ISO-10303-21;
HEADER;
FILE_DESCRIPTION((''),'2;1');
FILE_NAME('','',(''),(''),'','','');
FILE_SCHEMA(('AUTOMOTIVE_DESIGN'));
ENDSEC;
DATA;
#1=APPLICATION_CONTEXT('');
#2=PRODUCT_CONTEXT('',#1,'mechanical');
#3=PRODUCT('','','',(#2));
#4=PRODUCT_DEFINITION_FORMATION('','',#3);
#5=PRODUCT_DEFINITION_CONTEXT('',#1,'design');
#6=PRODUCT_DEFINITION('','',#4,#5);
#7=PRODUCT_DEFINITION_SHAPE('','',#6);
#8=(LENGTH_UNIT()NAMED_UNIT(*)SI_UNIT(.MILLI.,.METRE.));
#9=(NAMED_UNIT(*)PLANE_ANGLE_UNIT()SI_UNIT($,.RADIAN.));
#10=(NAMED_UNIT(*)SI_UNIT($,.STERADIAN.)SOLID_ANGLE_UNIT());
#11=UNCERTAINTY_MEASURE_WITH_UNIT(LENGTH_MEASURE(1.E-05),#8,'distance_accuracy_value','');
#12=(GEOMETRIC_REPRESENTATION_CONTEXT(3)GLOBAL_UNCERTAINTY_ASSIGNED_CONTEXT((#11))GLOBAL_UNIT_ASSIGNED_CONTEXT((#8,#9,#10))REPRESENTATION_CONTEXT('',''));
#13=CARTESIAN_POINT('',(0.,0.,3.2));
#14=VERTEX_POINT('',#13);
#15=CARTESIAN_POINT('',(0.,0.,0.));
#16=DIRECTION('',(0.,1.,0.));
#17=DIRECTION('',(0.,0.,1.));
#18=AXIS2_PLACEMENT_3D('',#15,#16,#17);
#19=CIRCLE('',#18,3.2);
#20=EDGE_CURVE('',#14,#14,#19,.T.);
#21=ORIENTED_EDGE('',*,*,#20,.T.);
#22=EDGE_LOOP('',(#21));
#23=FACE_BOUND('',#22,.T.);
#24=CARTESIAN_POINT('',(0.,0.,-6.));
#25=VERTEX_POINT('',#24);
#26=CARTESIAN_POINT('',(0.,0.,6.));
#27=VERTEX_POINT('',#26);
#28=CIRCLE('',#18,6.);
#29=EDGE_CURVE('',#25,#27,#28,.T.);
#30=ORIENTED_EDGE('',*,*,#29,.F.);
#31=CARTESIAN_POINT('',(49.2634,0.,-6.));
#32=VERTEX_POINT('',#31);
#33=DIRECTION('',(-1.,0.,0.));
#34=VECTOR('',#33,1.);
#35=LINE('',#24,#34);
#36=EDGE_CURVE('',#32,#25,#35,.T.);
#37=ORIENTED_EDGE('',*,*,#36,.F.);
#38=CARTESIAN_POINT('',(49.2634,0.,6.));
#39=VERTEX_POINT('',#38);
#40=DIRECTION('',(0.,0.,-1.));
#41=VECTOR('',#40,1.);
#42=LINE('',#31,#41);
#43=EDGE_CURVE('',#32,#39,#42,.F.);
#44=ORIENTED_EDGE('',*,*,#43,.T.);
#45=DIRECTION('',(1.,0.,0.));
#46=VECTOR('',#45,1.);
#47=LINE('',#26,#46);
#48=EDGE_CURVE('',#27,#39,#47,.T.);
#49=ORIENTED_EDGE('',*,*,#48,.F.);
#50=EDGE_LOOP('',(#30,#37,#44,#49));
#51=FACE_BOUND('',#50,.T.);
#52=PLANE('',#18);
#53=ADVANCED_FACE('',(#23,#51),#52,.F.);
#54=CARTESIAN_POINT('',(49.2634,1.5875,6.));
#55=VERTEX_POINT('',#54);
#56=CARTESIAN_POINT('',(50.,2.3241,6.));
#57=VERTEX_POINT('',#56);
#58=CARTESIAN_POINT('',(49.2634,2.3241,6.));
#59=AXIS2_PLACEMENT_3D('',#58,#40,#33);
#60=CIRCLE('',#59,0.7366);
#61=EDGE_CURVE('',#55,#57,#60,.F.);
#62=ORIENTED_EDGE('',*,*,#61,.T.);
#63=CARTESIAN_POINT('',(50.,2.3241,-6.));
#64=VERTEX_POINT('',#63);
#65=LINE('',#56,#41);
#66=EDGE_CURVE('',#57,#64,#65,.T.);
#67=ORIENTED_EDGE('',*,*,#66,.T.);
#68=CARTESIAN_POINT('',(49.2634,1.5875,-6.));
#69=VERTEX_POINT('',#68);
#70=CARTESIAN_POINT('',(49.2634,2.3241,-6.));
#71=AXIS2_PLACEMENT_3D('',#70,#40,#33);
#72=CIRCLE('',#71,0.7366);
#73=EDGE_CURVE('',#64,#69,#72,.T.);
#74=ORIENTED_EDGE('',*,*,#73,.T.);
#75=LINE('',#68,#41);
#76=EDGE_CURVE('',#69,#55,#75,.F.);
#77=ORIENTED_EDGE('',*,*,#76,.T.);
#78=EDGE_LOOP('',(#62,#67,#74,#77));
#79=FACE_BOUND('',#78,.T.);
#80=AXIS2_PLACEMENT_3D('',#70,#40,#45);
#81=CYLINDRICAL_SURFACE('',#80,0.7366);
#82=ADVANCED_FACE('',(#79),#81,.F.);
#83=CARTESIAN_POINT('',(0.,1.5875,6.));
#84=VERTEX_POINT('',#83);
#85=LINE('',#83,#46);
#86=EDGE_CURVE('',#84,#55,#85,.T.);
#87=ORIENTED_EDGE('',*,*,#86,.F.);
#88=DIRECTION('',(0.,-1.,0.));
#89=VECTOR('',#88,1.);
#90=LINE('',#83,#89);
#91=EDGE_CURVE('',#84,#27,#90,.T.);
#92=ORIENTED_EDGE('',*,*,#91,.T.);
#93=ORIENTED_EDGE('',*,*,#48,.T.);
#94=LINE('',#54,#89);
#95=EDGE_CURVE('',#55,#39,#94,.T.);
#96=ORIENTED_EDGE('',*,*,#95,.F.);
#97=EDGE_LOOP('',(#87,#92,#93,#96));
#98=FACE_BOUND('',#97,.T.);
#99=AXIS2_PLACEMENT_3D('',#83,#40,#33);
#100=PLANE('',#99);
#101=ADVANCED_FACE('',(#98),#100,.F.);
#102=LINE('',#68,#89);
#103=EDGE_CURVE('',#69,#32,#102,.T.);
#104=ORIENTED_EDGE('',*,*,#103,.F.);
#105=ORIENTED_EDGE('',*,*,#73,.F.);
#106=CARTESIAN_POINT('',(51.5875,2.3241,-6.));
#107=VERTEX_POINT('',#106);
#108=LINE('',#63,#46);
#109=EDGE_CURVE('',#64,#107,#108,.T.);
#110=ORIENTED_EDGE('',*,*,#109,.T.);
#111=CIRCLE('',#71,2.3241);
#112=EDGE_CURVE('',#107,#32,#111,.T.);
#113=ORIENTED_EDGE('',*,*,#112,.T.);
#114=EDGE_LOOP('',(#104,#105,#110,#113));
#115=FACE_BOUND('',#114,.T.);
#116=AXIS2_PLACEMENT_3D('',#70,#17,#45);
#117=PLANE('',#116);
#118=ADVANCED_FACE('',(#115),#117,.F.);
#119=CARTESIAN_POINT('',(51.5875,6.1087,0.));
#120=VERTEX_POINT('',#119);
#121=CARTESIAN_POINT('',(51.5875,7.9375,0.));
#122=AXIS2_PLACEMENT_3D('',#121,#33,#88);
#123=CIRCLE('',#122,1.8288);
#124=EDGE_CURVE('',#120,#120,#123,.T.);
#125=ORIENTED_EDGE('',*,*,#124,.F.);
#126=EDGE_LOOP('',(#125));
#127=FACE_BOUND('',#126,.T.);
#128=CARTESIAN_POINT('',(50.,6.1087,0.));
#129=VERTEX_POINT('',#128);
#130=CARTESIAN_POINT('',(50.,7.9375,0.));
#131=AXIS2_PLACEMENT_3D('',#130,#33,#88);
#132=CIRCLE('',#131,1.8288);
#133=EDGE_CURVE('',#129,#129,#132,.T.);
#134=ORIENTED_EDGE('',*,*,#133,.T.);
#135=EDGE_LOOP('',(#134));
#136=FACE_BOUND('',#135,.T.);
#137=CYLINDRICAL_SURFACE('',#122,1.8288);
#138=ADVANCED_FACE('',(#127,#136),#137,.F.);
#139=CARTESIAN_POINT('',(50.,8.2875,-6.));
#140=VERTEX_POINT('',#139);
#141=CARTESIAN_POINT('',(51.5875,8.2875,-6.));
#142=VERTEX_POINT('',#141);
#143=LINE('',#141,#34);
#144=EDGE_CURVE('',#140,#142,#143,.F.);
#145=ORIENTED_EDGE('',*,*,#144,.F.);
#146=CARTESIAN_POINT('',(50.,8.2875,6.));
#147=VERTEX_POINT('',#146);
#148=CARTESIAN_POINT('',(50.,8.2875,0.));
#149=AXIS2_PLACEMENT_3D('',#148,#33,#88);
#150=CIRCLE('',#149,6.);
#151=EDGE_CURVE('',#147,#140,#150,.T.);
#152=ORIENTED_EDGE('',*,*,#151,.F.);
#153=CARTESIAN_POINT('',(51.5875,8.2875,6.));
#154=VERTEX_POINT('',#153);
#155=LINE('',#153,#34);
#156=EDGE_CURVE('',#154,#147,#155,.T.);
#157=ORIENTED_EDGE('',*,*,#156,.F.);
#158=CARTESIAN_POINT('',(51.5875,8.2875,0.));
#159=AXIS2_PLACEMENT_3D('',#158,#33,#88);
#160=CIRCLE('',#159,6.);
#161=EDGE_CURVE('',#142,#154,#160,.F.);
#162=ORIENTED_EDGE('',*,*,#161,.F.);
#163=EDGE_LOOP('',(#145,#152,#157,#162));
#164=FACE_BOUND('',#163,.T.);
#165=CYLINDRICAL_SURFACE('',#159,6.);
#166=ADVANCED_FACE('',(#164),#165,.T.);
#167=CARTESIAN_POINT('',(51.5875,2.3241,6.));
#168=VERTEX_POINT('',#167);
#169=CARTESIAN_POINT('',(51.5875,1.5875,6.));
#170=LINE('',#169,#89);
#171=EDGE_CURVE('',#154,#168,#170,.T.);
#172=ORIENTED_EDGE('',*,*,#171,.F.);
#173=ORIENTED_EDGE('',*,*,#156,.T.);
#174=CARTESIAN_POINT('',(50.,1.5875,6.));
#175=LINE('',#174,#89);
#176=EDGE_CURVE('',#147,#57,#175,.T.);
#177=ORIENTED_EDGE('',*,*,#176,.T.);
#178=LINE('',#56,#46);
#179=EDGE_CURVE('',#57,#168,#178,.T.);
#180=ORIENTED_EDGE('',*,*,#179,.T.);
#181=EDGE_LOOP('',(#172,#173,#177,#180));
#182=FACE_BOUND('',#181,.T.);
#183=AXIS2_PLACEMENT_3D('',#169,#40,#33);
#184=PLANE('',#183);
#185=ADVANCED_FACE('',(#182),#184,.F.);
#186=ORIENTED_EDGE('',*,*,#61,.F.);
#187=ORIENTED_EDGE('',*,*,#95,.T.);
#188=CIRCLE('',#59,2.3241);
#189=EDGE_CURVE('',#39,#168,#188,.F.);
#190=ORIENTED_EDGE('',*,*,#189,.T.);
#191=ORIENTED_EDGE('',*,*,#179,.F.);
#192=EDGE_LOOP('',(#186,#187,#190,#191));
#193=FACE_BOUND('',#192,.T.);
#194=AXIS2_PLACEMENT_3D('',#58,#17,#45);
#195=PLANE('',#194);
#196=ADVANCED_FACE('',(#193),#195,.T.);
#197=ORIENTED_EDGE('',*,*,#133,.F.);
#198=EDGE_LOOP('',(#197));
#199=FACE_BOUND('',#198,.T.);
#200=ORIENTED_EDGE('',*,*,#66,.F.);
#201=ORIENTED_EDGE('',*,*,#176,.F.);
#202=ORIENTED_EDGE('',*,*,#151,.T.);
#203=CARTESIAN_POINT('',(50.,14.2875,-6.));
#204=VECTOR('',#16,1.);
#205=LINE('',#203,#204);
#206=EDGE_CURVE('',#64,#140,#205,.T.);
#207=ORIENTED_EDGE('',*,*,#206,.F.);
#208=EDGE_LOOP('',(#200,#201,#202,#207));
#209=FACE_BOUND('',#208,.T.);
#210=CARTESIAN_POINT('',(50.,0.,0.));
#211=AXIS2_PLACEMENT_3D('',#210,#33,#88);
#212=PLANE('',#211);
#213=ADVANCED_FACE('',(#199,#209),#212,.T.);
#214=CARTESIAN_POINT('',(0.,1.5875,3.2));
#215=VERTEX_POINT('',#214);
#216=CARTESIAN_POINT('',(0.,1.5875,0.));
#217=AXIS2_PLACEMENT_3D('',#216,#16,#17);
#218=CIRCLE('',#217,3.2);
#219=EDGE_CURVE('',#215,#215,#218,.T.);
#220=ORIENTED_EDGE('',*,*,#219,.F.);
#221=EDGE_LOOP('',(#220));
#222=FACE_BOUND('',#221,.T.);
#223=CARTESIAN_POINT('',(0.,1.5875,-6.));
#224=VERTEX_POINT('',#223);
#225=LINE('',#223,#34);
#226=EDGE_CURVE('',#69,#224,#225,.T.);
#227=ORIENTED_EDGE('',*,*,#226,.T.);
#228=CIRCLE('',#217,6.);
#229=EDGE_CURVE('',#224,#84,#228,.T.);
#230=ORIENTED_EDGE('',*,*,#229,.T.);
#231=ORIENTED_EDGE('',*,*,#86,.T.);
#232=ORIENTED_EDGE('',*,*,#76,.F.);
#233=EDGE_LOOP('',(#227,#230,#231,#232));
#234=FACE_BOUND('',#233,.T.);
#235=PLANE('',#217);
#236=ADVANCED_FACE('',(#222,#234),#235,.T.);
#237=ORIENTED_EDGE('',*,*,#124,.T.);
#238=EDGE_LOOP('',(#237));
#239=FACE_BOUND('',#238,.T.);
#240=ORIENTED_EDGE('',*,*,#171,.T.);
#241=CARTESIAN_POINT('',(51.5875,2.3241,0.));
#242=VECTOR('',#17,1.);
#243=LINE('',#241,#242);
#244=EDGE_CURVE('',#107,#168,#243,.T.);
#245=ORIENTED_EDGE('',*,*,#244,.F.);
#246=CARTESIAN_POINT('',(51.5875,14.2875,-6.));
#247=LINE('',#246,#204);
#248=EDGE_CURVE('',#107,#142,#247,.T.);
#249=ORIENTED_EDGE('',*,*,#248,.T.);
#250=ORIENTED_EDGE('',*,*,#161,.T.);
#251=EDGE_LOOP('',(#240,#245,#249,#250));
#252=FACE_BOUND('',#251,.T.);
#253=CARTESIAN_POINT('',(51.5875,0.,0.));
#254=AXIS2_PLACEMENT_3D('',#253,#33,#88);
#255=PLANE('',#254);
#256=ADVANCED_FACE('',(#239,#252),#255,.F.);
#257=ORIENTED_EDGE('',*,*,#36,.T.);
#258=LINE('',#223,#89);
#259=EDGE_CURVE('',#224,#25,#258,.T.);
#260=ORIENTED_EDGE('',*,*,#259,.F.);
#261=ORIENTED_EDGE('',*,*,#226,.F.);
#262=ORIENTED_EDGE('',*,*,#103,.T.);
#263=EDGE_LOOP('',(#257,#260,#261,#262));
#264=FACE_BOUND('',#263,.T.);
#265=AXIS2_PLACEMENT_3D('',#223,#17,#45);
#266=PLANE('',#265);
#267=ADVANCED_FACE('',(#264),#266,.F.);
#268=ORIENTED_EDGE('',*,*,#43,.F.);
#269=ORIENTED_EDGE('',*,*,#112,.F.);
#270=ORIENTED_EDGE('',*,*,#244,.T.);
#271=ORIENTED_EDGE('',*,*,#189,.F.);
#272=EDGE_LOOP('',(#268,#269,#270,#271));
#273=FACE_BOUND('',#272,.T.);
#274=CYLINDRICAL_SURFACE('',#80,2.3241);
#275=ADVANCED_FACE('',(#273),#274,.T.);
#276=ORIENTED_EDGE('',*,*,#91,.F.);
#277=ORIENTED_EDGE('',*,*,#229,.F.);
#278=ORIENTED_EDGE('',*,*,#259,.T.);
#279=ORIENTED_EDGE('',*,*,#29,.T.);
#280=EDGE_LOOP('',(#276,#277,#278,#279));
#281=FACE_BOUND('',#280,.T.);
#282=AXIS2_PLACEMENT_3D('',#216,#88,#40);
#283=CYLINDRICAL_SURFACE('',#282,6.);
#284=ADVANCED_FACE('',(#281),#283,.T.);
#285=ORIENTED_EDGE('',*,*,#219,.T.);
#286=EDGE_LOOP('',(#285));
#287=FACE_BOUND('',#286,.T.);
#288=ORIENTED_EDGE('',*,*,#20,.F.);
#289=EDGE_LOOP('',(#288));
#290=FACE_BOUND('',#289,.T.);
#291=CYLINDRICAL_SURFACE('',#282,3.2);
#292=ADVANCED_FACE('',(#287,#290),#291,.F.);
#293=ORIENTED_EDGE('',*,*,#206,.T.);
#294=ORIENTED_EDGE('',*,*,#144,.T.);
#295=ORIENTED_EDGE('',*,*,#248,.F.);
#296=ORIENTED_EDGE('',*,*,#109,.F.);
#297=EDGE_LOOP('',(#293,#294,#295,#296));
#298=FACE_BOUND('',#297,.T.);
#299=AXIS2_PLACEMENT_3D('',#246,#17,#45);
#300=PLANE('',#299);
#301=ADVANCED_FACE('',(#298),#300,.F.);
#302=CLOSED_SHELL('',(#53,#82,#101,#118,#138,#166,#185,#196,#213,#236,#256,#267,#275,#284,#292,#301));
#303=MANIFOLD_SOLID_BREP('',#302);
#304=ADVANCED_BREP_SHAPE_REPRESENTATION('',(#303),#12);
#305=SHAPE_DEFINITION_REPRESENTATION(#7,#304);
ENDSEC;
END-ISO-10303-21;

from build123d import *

# Parameters (mm, degrees)
SKETCH1_R                    = 3.2
BASE_FLANGE1_DEPTH           = 1.5875
EDGE_FLANGE1_STRIP_W         = 7.8232
EDGE_FLANGE1_STRIP_H         = 1.5875
EDGE_FLANGE1_STRIP_CUT_DEPTH = 12
EDGE_FLANGE1_DEPTH           = 12
HOLE1_START                  = 50
HOLE1_OUTLINE_R              = 1.8288
HOLE1_DEPTH                  = 1.5875
FILLET1_RADIUS               = 6
FILLET1_LENGTH               = 1.5875


# Read off the part's stored shape, not the designer's step: Hole1
# Sheet-metal steps are written as plain solids
with BuildPart() as part:
    # Sketch1 → Base-Flange1 (new body)
    with BuildSketch(Plane(origin=(0, 0, 0), x_dir=(1, 0, 0), z_dir=(0, 1, 0))):
        with BuildLine():
            Line((0, 6), (50, 6))
            Line((50, 6), (50, -6))
            Line((50, -6), (0, -6))
            ThreePointArc((0, -6), (-6, 0), (0, 6))
        make_face()
        with Locations(Location((0, 0, 0), (0, 0, 270))):
            Circle(SKETCH1_R, mode=Mode.SUBTRACT)
    extrude(amount=BASE_FLANGE1_DEPTH)

    # Edge-Flange1 strip (across the edge) → Edge-Flange1 strip cut (cut)
    with BuildSketch(Plane(origin=(50, 1.5875, 6), x_dir=(-1, 0, 0), z_dir=(0, 0, -1))):
        with Locations((-3.175, -0.79375)):
            Rectangle(EDGE_FLANGE1_STRIP_W, EDGE_FLANGE1_STRIP_H)
    extrude(amount=EDGE_FLANGE1_STRIP_CUT_DEPTH, mode=Mode.SUBTRACT)

    # Edge-Flange1 section (across the edge) → Edge-Flange1 (add)
    with BuildSketch(Plane(origin=(50, 1.5875, 6), x_dir=(-1, 0, 0), z_dir=(0, 0, -1))):
        with BuildLine():
            Line((-1.5875, 0.7366), (-1.5875, 12.7))
            Line((-1.5875, 12.7), (0, 12.7))
            Line((0, 12.7), (0, 0.7366))
            ThreePointArc((0, 0.7366), (0.215745145, 0.215745145), (0.7366, 0))
            Line((0.7366, 0), (0.7366, -1.5875))
            ThreePointArc((0.7366, -1.5875), (-0.90678687, -0.90678687), (-1.5875, 0.7366))
        make_face()
    extrude(amount=EDGE_FLANGE1_DEPTH)

    # Hole1 outline → Hole1 (cut)
    with BuildSketch(Plane.YZ.offset(HOLE1_START)):
        with Locations((7.9375, 0)):
            Circle(HOLE1_OUTLINE_R)
    extrude(amount=HOLE1_DEPTH, mode=Mode.SUBTRACT)

    # Fillet1: full round fillet: the end face becomes a half cylinder, R = half its width
    fillet1_face = Plane((50.79375, 14.2875, 0), x_dir=(1, 0, 0), z_dir=(0, 1, 0))  # on the end face: x along it, z out of the body
    fillet1_slab = fillet1_face.offset(-FILLET1_RADIUS / 2) * Box(FILLET1_LENGTH, 2 * FILLET1_RADIUS, FILLET1_RADIUS, mode=Mode.PRIVATE)  # the body's end, R deep
    fillet1_round = Plane((50.79375, 8.2875, 0), x_dir=(0, 1, 0), z_dir=(1, 0, 0)) * Cylinder(FILLET1_RADIUS, FILLET1_LENGTH, mode=Mode.PRIVATE)  # its axis R under the face
    add(fillet1_slab - fillet1_round, mode=Mode.SUBTRACT)


solid = part.part
